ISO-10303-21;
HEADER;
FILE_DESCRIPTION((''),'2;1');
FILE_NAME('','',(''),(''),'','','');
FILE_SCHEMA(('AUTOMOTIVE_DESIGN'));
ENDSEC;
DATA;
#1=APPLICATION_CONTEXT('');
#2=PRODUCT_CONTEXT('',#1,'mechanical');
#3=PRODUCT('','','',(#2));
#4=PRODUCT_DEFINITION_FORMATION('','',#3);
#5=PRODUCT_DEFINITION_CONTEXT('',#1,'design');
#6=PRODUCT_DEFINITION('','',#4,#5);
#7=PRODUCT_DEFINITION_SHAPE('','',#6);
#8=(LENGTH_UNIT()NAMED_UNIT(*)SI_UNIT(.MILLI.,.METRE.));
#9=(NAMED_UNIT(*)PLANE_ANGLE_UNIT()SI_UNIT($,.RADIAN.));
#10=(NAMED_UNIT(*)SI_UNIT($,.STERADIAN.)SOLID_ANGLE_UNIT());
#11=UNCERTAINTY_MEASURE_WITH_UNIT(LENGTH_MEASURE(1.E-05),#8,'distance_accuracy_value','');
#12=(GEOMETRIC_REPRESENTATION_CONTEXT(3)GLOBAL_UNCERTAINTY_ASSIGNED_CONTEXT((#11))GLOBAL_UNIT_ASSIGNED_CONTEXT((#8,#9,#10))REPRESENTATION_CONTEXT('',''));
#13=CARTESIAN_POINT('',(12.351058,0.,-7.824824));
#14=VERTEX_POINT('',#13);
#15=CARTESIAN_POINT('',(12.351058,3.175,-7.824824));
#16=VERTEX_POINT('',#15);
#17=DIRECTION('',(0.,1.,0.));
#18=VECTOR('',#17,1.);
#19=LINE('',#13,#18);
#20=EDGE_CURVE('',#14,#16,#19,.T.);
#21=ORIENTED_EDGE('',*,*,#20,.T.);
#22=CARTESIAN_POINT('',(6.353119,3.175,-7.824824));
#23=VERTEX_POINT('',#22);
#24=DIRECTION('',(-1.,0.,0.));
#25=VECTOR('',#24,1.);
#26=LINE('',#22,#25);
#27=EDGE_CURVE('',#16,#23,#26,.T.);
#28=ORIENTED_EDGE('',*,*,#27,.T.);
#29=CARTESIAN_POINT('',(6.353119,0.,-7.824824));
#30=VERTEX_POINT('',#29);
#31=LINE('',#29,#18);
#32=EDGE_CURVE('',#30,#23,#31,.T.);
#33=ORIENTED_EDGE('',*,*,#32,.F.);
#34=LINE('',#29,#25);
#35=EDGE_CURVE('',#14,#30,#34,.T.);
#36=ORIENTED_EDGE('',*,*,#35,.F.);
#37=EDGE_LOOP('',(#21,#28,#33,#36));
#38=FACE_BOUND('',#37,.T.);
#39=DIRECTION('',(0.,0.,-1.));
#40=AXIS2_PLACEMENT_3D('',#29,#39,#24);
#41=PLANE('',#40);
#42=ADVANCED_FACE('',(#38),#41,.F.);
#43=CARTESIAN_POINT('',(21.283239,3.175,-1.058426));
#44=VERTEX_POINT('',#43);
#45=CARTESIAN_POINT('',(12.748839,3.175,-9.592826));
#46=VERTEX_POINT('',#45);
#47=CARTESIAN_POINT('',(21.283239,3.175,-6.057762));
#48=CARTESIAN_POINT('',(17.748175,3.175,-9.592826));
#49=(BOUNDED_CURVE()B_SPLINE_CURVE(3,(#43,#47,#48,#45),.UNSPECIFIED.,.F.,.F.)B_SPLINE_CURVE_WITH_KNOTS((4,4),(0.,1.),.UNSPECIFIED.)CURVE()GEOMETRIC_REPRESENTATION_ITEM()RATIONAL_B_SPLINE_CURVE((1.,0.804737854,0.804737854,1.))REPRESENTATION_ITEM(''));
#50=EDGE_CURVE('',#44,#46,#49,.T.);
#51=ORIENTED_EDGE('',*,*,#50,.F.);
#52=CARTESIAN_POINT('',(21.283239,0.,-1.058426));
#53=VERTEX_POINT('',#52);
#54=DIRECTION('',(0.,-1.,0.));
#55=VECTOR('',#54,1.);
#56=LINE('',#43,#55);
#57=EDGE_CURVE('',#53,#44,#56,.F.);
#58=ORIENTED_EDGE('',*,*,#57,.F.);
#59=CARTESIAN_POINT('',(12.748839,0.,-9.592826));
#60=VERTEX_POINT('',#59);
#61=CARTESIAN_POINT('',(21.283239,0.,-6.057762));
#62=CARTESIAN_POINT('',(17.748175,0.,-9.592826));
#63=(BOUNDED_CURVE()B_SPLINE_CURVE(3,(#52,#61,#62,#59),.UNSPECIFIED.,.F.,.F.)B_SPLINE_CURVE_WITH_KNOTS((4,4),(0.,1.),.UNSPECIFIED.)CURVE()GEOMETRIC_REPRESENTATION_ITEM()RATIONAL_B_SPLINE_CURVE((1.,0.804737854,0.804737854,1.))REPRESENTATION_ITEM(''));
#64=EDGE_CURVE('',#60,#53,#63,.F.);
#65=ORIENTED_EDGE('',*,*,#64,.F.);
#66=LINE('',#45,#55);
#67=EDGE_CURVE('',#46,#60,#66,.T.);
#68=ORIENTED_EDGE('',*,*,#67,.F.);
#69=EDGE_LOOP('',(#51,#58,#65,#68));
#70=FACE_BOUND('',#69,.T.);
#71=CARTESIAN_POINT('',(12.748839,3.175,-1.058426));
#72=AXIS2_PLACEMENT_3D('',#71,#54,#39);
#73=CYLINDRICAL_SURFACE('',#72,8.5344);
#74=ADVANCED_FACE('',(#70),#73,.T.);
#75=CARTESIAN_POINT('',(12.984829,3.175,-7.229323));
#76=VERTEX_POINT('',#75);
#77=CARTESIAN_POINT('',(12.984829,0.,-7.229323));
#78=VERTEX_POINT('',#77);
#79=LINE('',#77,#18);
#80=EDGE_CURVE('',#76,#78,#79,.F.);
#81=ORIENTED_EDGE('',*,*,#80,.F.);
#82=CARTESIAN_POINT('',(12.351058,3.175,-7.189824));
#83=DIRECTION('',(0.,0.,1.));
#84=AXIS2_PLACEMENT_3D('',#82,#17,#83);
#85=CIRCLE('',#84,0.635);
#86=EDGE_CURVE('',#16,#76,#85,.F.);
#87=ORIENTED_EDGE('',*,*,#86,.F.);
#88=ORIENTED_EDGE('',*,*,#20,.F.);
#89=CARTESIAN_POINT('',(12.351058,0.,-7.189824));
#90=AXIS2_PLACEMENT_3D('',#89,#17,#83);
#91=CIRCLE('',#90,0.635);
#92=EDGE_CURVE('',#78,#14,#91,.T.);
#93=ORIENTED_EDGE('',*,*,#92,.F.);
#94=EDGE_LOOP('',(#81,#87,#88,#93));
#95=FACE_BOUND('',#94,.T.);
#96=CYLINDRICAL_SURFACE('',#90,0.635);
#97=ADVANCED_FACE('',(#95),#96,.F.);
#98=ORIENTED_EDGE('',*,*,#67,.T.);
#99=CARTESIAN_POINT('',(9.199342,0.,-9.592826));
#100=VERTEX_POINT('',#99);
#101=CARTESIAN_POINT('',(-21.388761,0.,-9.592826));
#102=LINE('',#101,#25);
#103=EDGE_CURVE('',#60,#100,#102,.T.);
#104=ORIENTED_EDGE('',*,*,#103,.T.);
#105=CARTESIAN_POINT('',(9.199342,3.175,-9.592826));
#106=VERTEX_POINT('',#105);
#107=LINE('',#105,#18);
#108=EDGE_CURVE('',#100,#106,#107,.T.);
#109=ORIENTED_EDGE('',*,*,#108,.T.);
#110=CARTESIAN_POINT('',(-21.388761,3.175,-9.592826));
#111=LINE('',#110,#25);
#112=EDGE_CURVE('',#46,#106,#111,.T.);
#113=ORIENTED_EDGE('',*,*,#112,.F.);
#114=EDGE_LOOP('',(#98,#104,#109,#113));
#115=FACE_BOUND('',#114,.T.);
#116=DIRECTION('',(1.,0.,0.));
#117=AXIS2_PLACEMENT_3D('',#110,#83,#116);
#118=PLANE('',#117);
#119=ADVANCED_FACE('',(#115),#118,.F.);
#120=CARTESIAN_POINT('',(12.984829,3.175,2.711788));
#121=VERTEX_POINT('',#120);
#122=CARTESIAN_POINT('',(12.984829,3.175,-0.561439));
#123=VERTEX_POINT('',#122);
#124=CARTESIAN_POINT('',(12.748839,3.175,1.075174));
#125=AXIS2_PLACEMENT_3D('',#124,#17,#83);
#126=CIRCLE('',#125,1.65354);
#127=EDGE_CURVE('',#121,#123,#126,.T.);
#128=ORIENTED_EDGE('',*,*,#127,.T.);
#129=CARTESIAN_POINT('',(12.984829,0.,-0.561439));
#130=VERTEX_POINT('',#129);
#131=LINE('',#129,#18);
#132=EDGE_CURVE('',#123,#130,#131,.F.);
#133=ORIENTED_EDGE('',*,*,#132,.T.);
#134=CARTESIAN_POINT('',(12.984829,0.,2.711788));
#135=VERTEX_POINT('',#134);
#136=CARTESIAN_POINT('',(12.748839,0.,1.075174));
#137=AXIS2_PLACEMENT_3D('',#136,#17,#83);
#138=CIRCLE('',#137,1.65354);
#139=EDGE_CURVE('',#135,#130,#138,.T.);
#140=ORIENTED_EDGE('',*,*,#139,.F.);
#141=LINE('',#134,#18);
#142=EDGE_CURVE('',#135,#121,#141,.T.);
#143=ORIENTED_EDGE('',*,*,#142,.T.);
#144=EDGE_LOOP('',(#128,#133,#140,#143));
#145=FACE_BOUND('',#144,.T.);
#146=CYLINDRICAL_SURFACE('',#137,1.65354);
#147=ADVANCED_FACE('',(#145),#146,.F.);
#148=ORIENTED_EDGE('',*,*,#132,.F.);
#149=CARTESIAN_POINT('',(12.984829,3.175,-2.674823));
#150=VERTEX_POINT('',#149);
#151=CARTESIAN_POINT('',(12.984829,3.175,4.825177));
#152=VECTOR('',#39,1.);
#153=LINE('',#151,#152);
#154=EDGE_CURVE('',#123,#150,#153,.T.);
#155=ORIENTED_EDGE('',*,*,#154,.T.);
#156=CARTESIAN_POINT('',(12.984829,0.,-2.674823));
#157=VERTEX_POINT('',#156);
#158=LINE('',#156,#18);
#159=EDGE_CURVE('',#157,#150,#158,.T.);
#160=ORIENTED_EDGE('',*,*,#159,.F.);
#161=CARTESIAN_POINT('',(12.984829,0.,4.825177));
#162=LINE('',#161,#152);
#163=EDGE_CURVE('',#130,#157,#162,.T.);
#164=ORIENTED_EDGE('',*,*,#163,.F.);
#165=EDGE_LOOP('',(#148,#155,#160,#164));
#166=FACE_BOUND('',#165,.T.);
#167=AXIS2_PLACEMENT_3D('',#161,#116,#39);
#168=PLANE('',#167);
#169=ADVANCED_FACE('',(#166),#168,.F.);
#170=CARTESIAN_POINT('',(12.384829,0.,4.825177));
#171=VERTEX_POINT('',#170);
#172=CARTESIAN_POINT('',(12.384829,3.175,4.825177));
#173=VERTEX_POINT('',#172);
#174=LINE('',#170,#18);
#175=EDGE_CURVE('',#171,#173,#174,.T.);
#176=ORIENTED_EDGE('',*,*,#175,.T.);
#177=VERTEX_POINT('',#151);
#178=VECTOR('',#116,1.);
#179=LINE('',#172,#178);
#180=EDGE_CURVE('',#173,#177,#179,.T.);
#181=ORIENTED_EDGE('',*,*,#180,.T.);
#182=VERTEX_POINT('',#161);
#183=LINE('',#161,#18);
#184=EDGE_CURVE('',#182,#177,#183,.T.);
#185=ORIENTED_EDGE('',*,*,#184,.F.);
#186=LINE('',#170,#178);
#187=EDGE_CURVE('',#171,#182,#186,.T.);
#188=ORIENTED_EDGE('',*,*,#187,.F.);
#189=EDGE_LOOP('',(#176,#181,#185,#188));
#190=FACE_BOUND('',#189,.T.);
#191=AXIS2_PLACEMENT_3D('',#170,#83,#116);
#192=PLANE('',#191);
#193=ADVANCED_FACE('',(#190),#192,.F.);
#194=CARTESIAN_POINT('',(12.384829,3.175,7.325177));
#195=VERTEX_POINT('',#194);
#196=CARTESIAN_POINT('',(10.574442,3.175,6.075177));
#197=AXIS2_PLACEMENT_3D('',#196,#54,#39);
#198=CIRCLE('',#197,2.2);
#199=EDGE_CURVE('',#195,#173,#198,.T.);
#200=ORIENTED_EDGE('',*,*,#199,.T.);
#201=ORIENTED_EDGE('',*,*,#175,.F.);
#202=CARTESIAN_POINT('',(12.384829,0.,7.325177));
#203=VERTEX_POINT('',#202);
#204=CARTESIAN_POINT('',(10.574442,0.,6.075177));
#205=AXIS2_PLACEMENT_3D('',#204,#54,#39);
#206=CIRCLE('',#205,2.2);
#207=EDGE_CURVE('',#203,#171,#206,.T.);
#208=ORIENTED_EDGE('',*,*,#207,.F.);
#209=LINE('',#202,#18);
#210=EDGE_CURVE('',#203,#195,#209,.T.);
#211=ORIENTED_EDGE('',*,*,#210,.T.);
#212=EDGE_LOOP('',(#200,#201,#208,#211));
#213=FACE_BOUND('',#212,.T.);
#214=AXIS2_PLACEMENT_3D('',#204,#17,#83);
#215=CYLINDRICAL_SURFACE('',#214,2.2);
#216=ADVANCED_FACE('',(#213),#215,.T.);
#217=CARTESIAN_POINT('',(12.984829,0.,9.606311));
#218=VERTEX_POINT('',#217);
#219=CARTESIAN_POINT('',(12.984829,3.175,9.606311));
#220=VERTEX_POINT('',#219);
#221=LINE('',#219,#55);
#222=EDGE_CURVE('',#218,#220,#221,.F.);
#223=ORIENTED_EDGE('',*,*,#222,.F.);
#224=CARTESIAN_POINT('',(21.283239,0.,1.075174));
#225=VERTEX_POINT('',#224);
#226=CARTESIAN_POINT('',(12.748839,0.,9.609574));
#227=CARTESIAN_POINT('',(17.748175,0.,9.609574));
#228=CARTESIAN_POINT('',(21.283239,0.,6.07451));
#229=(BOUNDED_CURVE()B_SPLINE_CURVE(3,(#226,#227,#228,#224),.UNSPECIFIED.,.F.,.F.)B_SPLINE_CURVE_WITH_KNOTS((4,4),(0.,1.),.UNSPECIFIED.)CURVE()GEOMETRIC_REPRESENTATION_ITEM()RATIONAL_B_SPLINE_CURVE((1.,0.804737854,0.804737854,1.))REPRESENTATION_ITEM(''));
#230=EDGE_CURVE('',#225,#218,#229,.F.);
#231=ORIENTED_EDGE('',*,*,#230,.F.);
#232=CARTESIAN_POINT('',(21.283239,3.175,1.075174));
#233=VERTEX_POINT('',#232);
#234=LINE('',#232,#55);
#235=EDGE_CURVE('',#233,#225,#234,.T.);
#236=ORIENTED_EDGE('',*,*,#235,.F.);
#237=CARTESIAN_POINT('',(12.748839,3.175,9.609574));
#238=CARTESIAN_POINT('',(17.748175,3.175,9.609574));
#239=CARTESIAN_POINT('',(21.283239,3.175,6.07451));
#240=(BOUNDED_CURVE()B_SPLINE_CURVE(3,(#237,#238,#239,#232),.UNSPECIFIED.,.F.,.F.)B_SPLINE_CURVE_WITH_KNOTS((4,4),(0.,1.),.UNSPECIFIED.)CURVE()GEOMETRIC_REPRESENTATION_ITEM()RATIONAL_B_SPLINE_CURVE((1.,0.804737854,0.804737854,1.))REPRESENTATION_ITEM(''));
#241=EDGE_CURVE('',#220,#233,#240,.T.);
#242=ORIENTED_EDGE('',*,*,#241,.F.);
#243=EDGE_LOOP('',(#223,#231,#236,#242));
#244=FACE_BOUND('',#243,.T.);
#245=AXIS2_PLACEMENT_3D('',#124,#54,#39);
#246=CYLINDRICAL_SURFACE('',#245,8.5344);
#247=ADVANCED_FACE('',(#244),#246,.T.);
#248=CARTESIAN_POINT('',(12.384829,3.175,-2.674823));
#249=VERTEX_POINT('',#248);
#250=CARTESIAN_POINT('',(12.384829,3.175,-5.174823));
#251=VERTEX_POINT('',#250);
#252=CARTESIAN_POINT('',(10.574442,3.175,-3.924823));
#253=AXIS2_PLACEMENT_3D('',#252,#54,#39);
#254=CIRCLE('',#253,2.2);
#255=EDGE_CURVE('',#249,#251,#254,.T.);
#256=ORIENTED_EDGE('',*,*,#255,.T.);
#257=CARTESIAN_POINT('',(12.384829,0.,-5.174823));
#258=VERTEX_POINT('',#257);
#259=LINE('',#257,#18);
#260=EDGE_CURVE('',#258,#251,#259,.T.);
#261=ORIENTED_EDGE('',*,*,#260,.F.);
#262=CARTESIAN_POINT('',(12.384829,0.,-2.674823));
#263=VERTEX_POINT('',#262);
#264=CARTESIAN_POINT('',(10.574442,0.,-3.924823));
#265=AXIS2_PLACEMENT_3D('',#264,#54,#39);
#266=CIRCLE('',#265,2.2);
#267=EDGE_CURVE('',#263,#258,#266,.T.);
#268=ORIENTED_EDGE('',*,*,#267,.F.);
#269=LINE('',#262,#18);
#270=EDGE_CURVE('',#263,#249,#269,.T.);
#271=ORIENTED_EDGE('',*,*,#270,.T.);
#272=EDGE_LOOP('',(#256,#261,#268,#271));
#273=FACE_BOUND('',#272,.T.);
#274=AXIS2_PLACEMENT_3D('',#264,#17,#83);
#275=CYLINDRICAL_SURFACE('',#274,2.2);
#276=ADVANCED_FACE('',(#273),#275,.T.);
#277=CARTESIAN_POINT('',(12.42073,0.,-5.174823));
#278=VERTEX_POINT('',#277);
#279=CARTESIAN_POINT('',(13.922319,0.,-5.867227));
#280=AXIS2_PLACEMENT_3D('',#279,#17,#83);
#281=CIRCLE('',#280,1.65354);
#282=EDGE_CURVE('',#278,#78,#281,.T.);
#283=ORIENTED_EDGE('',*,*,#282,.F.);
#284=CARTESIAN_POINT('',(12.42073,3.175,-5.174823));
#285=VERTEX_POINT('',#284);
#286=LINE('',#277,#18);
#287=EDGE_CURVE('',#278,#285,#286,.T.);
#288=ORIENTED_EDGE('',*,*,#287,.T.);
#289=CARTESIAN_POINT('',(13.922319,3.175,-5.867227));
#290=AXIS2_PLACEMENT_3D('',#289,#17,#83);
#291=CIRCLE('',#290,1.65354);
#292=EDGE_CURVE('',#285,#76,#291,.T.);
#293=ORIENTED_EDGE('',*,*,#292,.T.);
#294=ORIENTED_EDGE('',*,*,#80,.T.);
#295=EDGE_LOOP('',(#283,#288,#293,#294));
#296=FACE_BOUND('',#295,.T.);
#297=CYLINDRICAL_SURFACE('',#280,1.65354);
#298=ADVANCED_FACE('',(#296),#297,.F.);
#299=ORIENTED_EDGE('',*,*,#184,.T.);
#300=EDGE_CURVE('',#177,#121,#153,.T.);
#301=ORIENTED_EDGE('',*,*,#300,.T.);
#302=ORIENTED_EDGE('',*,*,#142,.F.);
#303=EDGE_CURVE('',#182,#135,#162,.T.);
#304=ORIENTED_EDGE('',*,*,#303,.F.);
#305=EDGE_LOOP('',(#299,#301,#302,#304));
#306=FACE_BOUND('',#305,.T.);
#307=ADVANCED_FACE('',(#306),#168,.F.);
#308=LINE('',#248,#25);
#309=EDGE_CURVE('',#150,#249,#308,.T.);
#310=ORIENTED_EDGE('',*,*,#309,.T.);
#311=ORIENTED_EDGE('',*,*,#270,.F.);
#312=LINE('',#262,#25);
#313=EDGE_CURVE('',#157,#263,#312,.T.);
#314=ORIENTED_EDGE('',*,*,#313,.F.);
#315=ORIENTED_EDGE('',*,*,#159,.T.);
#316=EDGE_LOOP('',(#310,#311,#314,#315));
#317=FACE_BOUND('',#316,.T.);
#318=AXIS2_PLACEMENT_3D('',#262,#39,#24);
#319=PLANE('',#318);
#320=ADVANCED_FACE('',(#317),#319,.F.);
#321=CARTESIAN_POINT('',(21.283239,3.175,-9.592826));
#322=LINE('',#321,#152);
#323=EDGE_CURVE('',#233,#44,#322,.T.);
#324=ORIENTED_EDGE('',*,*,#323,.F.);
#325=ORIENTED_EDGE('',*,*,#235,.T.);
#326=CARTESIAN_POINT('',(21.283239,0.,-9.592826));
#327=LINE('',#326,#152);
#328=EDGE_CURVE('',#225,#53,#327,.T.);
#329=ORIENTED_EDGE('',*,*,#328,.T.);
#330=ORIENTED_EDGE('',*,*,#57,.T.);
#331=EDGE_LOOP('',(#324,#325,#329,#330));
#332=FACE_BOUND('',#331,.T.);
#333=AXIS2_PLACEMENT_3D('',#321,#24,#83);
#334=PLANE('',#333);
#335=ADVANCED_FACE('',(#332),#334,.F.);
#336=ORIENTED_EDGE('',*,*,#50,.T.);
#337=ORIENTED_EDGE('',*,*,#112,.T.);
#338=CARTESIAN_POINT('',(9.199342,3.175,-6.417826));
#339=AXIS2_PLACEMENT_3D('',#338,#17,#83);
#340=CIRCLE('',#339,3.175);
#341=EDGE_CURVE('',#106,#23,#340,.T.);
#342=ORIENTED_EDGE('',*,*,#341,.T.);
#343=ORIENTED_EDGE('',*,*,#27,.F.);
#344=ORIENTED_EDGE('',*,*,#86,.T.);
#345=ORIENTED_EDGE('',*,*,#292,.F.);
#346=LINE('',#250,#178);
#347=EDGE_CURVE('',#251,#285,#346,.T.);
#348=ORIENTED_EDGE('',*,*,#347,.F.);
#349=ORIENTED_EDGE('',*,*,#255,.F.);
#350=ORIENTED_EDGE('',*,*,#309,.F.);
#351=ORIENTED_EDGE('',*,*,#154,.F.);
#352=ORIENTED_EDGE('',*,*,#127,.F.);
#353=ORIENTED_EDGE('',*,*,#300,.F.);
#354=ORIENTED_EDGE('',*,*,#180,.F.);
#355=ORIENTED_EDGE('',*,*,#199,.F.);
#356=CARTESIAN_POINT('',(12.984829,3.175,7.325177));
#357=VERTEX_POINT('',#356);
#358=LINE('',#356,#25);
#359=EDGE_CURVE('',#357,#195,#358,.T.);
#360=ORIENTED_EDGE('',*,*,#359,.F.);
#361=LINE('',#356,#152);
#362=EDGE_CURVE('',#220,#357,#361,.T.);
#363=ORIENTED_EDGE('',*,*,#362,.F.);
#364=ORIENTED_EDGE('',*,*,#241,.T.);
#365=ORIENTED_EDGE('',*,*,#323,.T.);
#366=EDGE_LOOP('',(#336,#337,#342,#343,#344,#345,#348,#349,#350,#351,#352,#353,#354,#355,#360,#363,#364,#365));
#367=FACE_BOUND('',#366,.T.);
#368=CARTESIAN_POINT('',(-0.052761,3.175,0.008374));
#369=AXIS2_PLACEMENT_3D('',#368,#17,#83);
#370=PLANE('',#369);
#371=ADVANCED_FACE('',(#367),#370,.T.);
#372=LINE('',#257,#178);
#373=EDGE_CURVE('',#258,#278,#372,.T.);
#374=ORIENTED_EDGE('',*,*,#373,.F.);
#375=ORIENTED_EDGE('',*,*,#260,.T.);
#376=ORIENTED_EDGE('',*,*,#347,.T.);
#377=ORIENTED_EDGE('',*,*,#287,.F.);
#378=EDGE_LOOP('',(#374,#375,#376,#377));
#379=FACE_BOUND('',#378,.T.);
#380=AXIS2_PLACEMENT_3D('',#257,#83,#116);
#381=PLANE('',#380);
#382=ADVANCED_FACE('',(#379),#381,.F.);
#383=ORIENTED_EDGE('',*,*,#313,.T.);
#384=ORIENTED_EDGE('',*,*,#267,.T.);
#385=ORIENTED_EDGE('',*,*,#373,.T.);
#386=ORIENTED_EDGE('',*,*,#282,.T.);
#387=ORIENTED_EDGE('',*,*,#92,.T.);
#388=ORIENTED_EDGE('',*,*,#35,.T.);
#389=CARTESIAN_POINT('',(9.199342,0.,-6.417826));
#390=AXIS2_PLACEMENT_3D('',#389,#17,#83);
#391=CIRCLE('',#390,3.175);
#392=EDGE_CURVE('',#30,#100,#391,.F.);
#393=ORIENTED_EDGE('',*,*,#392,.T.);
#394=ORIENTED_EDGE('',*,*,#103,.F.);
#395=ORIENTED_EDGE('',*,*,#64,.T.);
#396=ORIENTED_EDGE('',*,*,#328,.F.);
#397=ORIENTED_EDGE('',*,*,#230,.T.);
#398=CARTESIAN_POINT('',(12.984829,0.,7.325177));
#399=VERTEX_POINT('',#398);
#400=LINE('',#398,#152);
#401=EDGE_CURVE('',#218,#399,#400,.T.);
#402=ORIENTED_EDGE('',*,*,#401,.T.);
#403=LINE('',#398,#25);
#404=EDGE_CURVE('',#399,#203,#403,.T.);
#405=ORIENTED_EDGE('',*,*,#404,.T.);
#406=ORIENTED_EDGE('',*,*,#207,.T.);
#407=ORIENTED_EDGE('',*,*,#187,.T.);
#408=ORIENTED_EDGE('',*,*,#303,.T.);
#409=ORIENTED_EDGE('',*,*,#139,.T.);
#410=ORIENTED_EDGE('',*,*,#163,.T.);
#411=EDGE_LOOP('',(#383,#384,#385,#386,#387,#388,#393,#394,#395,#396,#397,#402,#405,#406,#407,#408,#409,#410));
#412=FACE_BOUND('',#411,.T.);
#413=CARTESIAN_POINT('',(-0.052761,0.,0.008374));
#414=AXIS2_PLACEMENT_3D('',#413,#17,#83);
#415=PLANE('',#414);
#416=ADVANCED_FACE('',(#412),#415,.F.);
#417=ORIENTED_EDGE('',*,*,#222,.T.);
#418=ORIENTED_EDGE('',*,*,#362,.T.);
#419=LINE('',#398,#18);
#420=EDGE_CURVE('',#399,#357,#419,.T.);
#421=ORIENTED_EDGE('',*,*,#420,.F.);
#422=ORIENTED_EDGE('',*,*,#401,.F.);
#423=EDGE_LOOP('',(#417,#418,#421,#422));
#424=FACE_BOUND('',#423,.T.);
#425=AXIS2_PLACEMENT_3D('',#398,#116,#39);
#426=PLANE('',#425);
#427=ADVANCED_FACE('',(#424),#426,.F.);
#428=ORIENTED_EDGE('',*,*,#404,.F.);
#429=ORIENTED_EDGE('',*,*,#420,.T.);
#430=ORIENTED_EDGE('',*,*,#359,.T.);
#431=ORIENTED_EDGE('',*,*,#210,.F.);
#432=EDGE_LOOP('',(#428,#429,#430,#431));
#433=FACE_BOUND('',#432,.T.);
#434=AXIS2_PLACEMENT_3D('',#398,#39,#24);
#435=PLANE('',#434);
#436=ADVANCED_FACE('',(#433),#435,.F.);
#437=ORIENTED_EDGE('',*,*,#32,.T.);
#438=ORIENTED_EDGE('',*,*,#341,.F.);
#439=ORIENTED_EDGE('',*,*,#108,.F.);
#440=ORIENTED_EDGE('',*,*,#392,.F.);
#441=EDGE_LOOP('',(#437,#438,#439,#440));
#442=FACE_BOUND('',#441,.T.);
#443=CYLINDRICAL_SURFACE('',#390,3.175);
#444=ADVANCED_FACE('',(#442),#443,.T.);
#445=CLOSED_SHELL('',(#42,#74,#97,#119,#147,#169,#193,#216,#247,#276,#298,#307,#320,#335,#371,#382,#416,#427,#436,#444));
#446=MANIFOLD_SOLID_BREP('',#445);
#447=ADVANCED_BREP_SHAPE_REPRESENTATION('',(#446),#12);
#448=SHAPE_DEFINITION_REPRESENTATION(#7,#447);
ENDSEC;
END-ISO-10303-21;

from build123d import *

# Parameters (mm, degrees)
SKETCH1_W           = 50.8
SKETCH1_H           = 22.86
BOSS_EXTRUDE1_DEPTH = 3.175
FILLET1_R           = 10.16
SKETCH3_R           = 1.9685
CUT_EXTRUDE1_DEPTH  = 29.033649869
FILLET3_R           = 10.16
SCALE1_SCALE_X      = 0.84
SCALE1_SCALE_Y      = 1
SCALE1_SCALE_Z      = 0.84
CUT_EXTRUDE2_DEPTH  = 24.662282921
FILLET4_R           = 3.175
FILLET5_DEPTH       = 3.175


with BuildPart() as part:
    # Sketch1 → Boss-Extrude1 (new body)
    with BuildSketch(Plane(origin=(0, 0, 0), x_dir=(1, 0, 0), z_dir=(0, 1, 0))):
        Rectangle(SKETCH1_W, SKETCH1_H)
    extrude(amount=BOSS_EXTRUDE1_DEPTH)

    # Fillet1
    fillet1_edges = [part.edges().sort_by_distance(p)[0] for p in [
        (25.4, 1.5875, 11.43),
        (-25.4, 1.5875, 11.43),
    ]]
    fillet(fillet1_edges, radius=FILLET1_R)

    # Sketch3 → Cut-Extrude1 (cut, through all)
    with BuildSketch(Plane(origin=(0, 3.175, 0), x_dir=(1, 0, 0), z_dir=(0, 1, 0))):
        with Locations(Location((15.24, -1.27, 0), (0, 0, 270))):
            Circle(SKETCH3_R)
        with Locations(Location((16.637, 6.994763457, 0), (0, 0, 270))):
            Circle(SKETCH3_R)
        with Locations(Location((-3.81, -1.27, 0), (0, 0, 270))):
            Circle(SKETCH3_R)
    extrude(amount=-CUT_EXTRUDE1_DEPTH, mode=Mode.SUBTRACT)

    # Fillet3
    fillet3_edges = [part.edges().sort_by_distance(p)[0] for p in [
        (-25.4, 1.5875, -11.43),
        (25.4, 1.5875, -11.43),
    ]]
    fillet(fillet3_edges, radius=FILLET3_R)


with BuildPart() as part_1:
    # Scale1: scaled about (-0.329754669, 1.5875, 0.052338299)
    add(part.part.scale((SCALE1_SCALE_X, SCALE1_SCALE_Y, SCALE1_SCALE_Z), about=(-0.329754669, 1.5875, 0.052338299)))

    # Sketch4 → Cut-Extrude2 (cut, through all)
    with BuildSketch(Plane(origin=(0, 3.175, 0), x_dir=(1, 0, 0), z_dir=(0, 1, 0))):
        with BuildLine():
            Line((12.984828754, -7.325177491), (12.984828754, -9.609574128))
            Line((12.984828754, -9.609574128), (-21.388760747, -9.609574128))
            Line((-21.388760747, -9.609574128), (-21.388760747, 9.592825872))
            Line((-21.388760747, 9.592825872), (6.353119253, 9.592825872))
            Line((6.353119253, 9.592825872), (6.353119253, 7.824824044))
            Line((6.353119253, 7.824824044), (12.984828754, 7.824824044))
            Line((12.984828754, 7.824824044), (12.984828754, 5.174822509))
            Line((12.984828754, 5.174822509), (12.384828754, 5.174822509))
            ThreePointArc((12.384828754, 5.174822509), (8.374442055, 3.924822509), (12.384828754, 2.674822509))
            Line((12.384828754, 2.674822509), (12.984828754, 2.674822509))
            Line((12.984828754, 2.674822509), (12.984828754, -4.825177491))
            Line((12.984828754, -4.825177491), (12.384828754, -4.825177491))
            ThreePointArc((12.384828754, -4.825177491), (8.374442055, -6.075177491), (12.384828754, -7.325177491))
            Line((12.384828754, -7.325177491), (12.984828754, -7.325177491))
        make_face()
    extrude(amount=-CUT_EXTRUDE2_DEPTH, mode=Mode.SUBTRACT)

    # Fillet4
    # the kernel refuses this fillet: 3.175 mm, written as the material it takes off along each edge
    with BuildSketch(Plane(origin=(6.353119253, 10.290555646, -9.592825872), x_dir=(1.0, 0, -2.4331567057805564e-11), z_dir=(0, -1, 0))) as fillet4_piece_1:
        with BuildLine():
            CenterArc((2.846222258, 3.175), FILLET4_R, 206.304974961, 63.695025041)
            Line((0, 1.768001828), (-0.056924445, 1.739861865))
            ThreePointArc((-0.056924445, 1.739861865), (-0.0635, 0.884000914), (-0.0635, 0))
            Line((-0.0635, 0), (0, -0.0635))
            Line((0, -0.0635), (2.846222258, -0.0635))
            Line((2.846222258, -0.0635), (2.846222258, 0))
        make_face()
    extrude(amount=17.406111292, mode=Mode.SUBTRACT)

    # Fillet5: read off the stored shape, not the designer's step
    # Fillet5 outline → Fillet5 (add)
    with BuildSketch(Plane(origin=(0, 0, 0), x_dir=(1, 0, 0), z_dir=(0, 1, 0))):
        with BuildLine():
            ThreePointArc((12.351058447, 7.824824044), (12.785881926, 7.65259131), (12.984828754, 7.22932339))
            Line((12.984828754, 7.22932339), (12.984828754, 7.824824044))
            Line((12.984828754, 7.824824044), (12.351058447, 7.824824044))
        make_face()
    extrude(amount=FILLET5_DEPTH)


solid = part_1.part
